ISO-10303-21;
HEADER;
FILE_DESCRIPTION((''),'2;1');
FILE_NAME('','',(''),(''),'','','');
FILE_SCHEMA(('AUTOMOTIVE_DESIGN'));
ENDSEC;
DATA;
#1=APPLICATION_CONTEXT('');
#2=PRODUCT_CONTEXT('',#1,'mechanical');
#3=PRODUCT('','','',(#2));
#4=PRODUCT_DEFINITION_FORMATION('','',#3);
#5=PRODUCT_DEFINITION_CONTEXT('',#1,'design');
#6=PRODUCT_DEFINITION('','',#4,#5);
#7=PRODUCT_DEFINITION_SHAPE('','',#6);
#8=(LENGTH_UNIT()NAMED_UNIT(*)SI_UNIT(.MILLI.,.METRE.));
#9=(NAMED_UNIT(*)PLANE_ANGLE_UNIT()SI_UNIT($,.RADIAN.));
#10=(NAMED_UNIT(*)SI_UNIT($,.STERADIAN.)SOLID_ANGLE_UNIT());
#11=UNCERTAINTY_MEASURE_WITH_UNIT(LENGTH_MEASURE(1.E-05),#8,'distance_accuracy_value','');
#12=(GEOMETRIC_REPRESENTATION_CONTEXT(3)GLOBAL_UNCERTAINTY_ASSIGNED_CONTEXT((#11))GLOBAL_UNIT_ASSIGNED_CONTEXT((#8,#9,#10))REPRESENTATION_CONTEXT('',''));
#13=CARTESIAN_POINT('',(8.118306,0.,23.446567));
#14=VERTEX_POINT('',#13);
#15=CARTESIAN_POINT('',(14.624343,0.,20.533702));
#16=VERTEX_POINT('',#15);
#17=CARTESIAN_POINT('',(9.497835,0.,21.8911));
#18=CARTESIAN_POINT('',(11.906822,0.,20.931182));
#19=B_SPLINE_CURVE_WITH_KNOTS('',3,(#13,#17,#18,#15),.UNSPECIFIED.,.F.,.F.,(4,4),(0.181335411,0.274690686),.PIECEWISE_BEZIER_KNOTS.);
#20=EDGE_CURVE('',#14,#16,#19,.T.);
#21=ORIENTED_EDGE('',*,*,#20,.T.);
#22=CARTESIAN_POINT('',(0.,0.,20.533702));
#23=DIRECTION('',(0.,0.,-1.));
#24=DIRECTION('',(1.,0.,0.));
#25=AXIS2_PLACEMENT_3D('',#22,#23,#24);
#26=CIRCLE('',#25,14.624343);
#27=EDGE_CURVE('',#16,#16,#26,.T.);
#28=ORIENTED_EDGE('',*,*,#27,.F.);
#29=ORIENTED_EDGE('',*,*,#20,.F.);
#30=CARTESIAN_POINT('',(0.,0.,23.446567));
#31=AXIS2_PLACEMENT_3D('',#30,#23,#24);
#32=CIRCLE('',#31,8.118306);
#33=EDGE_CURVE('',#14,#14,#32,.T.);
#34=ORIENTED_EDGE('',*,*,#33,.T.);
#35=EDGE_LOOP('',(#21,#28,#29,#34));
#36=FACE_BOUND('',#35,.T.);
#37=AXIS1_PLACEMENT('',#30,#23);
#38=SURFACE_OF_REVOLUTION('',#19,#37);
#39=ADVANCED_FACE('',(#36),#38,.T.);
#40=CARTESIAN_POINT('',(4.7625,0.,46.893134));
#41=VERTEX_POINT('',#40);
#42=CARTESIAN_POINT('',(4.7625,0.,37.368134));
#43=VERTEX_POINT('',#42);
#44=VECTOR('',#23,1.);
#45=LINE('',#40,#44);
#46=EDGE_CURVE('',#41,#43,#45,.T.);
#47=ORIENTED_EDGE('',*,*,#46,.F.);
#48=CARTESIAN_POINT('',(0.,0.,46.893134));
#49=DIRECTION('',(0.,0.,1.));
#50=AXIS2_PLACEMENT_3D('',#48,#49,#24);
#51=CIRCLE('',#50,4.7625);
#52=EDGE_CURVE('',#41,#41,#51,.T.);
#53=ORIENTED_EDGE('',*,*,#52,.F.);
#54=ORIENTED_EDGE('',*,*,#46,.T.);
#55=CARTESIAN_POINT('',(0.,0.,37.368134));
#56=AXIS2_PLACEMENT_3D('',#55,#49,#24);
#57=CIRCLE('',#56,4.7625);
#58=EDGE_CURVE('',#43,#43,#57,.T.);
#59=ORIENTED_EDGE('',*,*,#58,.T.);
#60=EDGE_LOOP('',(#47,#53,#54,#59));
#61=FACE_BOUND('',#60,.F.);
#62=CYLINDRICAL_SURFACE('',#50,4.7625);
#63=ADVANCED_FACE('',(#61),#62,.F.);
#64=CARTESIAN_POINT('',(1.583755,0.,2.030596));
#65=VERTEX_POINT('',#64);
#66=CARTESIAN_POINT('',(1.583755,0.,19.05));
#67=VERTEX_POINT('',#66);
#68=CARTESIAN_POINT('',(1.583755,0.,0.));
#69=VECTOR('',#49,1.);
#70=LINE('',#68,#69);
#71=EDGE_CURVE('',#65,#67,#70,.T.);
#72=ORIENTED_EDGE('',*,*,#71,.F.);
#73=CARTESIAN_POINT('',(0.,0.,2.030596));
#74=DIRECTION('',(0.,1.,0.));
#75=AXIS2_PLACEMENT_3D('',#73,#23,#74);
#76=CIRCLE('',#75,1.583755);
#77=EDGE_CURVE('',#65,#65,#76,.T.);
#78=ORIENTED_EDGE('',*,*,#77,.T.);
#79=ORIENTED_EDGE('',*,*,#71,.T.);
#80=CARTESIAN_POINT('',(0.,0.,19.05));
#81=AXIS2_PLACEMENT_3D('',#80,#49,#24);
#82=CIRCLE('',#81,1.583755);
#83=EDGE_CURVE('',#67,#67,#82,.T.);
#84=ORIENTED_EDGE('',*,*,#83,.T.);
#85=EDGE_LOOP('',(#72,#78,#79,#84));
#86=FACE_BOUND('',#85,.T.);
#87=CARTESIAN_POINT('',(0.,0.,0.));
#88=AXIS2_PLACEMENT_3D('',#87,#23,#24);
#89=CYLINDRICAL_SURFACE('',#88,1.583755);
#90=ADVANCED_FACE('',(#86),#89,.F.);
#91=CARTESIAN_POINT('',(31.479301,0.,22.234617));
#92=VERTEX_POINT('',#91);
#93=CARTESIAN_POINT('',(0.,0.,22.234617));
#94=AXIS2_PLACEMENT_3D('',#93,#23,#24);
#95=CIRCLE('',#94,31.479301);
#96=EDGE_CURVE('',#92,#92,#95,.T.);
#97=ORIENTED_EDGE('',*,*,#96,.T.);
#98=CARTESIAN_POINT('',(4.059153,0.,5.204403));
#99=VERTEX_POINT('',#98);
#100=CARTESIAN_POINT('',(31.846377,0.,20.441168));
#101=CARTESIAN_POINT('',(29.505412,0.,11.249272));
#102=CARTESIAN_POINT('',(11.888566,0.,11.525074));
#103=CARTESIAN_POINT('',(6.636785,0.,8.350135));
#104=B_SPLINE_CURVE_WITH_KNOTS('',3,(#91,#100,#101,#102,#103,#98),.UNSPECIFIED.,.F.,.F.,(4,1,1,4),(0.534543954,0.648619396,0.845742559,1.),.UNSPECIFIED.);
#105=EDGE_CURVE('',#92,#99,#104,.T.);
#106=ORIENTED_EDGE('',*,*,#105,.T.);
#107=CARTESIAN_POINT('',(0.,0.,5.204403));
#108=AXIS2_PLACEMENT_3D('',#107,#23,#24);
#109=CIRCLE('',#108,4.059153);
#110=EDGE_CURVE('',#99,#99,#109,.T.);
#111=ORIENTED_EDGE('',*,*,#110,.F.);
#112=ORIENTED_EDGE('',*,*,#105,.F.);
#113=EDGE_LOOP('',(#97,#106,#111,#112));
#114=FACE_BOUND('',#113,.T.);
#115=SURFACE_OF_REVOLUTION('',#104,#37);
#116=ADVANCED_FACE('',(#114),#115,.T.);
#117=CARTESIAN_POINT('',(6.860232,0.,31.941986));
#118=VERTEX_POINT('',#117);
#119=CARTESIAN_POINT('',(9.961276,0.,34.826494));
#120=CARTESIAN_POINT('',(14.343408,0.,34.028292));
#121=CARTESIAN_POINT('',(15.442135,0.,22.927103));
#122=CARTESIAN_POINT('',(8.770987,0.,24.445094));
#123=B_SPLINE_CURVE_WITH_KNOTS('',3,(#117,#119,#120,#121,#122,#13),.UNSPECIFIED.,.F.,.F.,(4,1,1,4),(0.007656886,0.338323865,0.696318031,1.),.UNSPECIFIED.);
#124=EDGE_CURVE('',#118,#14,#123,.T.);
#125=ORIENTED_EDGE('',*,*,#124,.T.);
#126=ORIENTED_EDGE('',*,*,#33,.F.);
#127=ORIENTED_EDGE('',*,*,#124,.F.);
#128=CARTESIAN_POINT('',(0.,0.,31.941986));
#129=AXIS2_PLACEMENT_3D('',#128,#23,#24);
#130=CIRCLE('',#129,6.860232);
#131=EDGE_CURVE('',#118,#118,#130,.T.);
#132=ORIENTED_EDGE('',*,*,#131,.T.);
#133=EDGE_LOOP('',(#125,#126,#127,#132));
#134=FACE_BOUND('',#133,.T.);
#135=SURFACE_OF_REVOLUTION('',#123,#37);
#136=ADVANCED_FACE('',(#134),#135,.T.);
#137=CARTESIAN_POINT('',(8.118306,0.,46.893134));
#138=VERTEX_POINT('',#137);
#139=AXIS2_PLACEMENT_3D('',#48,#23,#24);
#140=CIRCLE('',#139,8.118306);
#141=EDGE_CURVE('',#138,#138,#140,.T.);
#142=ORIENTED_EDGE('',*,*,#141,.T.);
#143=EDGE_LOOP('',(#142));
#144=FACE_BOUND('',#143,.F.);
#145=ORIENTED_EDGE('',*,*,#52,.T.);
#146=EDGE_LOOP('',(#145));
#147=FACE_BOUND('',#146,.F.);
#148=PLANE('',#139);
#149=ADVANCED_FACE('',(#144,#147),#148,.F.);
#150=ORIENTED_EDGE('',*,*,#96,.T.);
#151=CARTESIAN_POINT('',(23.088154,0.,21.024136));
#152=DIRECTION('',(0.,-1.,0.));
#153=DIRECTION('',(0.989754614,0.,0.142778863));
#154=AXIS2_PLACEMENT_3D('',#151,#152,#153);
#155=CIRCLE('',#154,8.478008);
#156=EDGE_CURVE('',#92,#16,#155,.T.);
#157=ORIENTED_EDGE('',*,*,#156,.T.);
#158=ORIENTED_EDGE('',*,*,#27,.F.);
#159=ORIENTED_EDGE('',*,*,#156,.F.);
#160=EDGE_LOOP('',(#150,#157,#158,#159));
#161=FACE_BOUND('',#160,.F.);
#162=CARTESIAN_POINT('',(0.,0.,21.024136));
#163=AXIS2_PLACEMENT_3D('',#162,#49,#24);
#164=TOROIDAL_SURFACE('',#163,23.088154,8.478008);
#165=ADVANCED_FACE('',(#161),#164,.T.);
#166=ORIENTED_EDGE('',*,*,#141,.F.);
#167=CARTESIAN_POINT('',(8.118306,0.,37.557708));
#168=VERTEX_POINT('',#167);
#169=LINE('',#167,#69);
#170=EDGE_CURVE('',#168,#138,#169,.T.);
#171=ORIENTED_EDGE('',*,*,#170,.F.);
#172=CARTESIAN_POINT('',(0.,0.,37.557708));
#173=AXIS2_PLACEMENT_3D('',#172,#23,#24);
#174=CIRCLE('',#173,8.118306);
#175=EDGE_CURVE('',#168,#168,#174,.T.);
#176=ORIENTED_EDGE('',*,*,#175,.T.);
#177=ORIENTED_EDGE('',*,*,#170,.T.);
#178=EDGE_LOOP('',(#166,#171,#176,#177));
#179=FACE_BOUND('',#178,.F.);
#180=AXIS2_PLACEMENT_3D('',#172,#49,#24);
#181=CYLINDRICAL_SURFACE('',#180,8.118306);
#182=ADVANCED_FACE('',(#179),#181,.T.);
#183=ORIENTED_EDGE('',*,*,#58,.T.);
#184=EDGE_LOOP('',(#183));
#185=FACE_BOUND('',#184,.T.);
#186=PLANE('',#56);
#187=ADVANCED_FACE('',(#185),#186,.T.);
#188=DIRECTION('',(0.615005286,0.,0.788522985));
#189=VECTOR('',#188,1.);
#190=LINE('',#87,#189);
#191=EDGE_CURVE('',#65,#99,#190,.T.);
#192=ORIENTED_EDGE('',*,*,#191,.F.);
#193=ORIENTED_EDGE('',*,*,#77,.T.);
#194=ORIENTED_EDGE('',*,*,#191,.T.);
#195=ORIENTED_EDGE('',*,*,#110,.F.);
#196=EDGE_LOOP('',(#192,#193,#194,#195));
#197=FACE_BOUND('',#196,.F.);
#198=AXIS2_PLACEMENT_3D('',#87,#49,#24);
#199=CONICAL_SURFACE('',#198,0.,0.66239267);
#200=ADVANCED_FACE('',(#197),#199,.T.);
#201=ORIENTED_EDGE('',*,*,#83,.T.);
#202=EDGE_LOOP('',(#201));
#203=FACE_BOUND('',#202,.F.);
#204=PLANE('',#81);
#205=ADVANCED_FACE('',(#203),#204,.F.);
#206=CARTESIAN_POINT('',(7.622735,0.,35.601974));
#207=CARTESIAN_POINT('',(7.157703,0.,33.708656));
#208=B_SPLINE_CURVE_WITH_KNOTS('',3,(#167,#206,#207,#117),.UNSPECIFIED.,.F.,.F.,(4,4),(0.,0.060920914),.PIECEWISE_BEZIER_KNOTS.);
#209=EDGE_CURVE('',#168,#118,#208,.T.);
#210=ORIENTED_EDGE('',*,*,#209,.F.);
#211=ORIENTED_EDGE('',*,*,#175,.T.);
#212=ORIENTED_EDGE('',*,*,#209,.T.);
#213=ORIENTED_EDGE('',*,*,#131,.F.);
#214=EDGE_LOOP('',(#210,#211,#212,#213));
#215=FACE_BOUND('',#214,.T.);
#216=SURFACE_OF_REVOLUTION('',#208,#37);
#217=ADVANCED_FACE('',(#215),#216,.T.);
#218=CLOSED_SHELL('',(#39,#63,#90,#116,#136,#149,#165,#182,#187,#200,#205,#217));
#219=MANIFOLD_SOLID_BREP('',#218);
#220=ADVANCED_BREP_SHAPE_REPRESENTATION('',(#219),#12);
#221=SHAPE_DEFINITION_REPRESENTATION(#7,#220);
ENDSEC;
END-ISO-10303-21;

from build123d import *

# Parameters (mm, degrees)
F2_R     = 4.7625
F3_DEPTH = 9.525
F4_R     = 1.583755089
F5_DEPTH = 19.05


with BuildPart() as f1:
    # F0 (on Front) → F1 (revolve)
    with BuildSketch(Plane.XZ):
        with BuildLine():
            Line((0, 46.8931338228), (0, 0))
            Line((0, 0), (4.0591530134, 5.2044031537))
            add(Edge.make_bspline(
                [(31.4793007411, 22.2346165378), (31.8463772185, 20.4411681612), (29.5054120617, 11.2492719757), (11.8885656035, 11.5250736881), (6.6367846724, 8.350135012), (4.0591530134, 5.2044031537)],
                knots=[0.5345439542, 0.5345439542, 0.5345439542, 0.5345439542, 0.6486193958, 0.8457425586, 1, 1, 1, 1], degree=3))
            add(Edge.make_bspline(
                [(14.6243430234, 20.5337022678), (17.3788808913, 20.130808601), (24.9437703638, 20.5617479815), (30.444556084, 24.7173182926), (31.3930745838, 22.6558970375), (31.4793007411, 22.2346165378)],
                knots=[0.2746906864, 0.2746906864, 0.2746906864, 0.2746906864, 0.369317623, 0.5077476664, 0.5345439542, 0.5345439542, 0.5345439542, 0.5345439542], degree=3))
            add(Edge.make_bspline(
                [(8.1183060268, 23.4465669114), (9.4978348292, 21.8910995306), (11.9068224974, 20.9311815771), (14.6243430234, 20.5337022678)],
                knots=[0.1813354106, 0.1813354106, 0.1813354106, 0.1813354106, 0.2746906864, 0.2746906864, 0.2746906864, 0.2746906864], degree=3))
            add(Edge.make_bspline(
                [(6.8602322526, 31.9419862034), (6.2722594814, 28.4500390964), (6.3389179378, 25.4528897408), (8.1183060268, 23.4465669114)],
                knots=[0.0609209143, 0.0609209143, 0.0609209143, 0.0609209143, 0.1813354106, 0.1813354106, 0.1813354106, 0.1813354106], degree=3))
            add(Edge.make_bspline(
                [(8.1183060268, 37.5577078759), (7.6227351887, 35.6019744349), (7.1577034033, 33.7086556398), (6.8602322526, 31.9419862034)],
                knots=[0, 0, 0, 0, 0.0609209143, 0.0609209143, 0.0609209143, 0.0609209143], degree=3))
            Line((8.1183060268, 37.5577078759), (8.1183060268, 46.8931338228))
            Line((8.1183060268, 46.8931338228), (0, 46.8931338228))
        make_face()
        with BuildLine():
            add(Edge.make_bspline(
                [(14.6243430234, 20.5337022678), (17.3788808913, 20.130808601), (24.9437703638, 20.5617479815), (30.444556084, 24.7173182926), (31.3930745838, 22.6558970375), (31.4793007411, 22.2346165378)],
                knots=[0.2746906864, 0.2746906864, 0.2746906864, 0.2746906864, 0.369317623, 0.5077476664, 0.5345439542, 0.5345439542, 0.5345439542, 0.5345439542], degree=3))
            ThreePointArc((31.4793007411, 22.2346165378), (22.2369207101, 29.4593017204), (14.6243430234, 20.5337022678))
        make_face()
        with BuildLine():
            add(Edge.make_bspline(
                [(6.8602322526, 31.9419862034), (9.9612760445, 34.8264937244), (14.3434078349, 34.0282924349), (15.4421353586, 22.9271029088), (8.7709869873, 24.4450941789), (8.1183060268, 23.4465669114)],
                knots=[0.0076568861, 0.0076568861, 0.0076568861, 0.0076568861, 0.338323865, 0.6963180309, 1, 1, 1, 1], degree=3))
            add(Edge.make_bspline(
                [(6.8602322526, 31.9419862034), (6.2722594814, 28.4500390964), (6.3389179378, 25.4528897408), (8.1183060268, 23.4465669114)],
                knots=[0.0609209143, 0.0609209143, 0.0609209143, 0.0609209143, 0.1813354106, 0.1813354106, 0.1813354106, 0.1813354106], degree=3))
        make_face()
    revolve(axis=Axis((0, 0, 23.4465669114), (0, 0, -1)))

    # F2 (on face) → F3 (cut)
    with BuildSketch(Plane.XY.offset(46.8931338228)):
        Circle(F2_R)
    extrude(amount=-F3_DEPTH, mode=Mode.SUBTRACT)

    # F4 (on Top) → F5 (cut)
    with BuildSketch(Plane.XY):
        Circle(F4_R)
    extrude(amount=F5_DEPTH, mode=Mode.SUBTRACT)


solid = f1.part
